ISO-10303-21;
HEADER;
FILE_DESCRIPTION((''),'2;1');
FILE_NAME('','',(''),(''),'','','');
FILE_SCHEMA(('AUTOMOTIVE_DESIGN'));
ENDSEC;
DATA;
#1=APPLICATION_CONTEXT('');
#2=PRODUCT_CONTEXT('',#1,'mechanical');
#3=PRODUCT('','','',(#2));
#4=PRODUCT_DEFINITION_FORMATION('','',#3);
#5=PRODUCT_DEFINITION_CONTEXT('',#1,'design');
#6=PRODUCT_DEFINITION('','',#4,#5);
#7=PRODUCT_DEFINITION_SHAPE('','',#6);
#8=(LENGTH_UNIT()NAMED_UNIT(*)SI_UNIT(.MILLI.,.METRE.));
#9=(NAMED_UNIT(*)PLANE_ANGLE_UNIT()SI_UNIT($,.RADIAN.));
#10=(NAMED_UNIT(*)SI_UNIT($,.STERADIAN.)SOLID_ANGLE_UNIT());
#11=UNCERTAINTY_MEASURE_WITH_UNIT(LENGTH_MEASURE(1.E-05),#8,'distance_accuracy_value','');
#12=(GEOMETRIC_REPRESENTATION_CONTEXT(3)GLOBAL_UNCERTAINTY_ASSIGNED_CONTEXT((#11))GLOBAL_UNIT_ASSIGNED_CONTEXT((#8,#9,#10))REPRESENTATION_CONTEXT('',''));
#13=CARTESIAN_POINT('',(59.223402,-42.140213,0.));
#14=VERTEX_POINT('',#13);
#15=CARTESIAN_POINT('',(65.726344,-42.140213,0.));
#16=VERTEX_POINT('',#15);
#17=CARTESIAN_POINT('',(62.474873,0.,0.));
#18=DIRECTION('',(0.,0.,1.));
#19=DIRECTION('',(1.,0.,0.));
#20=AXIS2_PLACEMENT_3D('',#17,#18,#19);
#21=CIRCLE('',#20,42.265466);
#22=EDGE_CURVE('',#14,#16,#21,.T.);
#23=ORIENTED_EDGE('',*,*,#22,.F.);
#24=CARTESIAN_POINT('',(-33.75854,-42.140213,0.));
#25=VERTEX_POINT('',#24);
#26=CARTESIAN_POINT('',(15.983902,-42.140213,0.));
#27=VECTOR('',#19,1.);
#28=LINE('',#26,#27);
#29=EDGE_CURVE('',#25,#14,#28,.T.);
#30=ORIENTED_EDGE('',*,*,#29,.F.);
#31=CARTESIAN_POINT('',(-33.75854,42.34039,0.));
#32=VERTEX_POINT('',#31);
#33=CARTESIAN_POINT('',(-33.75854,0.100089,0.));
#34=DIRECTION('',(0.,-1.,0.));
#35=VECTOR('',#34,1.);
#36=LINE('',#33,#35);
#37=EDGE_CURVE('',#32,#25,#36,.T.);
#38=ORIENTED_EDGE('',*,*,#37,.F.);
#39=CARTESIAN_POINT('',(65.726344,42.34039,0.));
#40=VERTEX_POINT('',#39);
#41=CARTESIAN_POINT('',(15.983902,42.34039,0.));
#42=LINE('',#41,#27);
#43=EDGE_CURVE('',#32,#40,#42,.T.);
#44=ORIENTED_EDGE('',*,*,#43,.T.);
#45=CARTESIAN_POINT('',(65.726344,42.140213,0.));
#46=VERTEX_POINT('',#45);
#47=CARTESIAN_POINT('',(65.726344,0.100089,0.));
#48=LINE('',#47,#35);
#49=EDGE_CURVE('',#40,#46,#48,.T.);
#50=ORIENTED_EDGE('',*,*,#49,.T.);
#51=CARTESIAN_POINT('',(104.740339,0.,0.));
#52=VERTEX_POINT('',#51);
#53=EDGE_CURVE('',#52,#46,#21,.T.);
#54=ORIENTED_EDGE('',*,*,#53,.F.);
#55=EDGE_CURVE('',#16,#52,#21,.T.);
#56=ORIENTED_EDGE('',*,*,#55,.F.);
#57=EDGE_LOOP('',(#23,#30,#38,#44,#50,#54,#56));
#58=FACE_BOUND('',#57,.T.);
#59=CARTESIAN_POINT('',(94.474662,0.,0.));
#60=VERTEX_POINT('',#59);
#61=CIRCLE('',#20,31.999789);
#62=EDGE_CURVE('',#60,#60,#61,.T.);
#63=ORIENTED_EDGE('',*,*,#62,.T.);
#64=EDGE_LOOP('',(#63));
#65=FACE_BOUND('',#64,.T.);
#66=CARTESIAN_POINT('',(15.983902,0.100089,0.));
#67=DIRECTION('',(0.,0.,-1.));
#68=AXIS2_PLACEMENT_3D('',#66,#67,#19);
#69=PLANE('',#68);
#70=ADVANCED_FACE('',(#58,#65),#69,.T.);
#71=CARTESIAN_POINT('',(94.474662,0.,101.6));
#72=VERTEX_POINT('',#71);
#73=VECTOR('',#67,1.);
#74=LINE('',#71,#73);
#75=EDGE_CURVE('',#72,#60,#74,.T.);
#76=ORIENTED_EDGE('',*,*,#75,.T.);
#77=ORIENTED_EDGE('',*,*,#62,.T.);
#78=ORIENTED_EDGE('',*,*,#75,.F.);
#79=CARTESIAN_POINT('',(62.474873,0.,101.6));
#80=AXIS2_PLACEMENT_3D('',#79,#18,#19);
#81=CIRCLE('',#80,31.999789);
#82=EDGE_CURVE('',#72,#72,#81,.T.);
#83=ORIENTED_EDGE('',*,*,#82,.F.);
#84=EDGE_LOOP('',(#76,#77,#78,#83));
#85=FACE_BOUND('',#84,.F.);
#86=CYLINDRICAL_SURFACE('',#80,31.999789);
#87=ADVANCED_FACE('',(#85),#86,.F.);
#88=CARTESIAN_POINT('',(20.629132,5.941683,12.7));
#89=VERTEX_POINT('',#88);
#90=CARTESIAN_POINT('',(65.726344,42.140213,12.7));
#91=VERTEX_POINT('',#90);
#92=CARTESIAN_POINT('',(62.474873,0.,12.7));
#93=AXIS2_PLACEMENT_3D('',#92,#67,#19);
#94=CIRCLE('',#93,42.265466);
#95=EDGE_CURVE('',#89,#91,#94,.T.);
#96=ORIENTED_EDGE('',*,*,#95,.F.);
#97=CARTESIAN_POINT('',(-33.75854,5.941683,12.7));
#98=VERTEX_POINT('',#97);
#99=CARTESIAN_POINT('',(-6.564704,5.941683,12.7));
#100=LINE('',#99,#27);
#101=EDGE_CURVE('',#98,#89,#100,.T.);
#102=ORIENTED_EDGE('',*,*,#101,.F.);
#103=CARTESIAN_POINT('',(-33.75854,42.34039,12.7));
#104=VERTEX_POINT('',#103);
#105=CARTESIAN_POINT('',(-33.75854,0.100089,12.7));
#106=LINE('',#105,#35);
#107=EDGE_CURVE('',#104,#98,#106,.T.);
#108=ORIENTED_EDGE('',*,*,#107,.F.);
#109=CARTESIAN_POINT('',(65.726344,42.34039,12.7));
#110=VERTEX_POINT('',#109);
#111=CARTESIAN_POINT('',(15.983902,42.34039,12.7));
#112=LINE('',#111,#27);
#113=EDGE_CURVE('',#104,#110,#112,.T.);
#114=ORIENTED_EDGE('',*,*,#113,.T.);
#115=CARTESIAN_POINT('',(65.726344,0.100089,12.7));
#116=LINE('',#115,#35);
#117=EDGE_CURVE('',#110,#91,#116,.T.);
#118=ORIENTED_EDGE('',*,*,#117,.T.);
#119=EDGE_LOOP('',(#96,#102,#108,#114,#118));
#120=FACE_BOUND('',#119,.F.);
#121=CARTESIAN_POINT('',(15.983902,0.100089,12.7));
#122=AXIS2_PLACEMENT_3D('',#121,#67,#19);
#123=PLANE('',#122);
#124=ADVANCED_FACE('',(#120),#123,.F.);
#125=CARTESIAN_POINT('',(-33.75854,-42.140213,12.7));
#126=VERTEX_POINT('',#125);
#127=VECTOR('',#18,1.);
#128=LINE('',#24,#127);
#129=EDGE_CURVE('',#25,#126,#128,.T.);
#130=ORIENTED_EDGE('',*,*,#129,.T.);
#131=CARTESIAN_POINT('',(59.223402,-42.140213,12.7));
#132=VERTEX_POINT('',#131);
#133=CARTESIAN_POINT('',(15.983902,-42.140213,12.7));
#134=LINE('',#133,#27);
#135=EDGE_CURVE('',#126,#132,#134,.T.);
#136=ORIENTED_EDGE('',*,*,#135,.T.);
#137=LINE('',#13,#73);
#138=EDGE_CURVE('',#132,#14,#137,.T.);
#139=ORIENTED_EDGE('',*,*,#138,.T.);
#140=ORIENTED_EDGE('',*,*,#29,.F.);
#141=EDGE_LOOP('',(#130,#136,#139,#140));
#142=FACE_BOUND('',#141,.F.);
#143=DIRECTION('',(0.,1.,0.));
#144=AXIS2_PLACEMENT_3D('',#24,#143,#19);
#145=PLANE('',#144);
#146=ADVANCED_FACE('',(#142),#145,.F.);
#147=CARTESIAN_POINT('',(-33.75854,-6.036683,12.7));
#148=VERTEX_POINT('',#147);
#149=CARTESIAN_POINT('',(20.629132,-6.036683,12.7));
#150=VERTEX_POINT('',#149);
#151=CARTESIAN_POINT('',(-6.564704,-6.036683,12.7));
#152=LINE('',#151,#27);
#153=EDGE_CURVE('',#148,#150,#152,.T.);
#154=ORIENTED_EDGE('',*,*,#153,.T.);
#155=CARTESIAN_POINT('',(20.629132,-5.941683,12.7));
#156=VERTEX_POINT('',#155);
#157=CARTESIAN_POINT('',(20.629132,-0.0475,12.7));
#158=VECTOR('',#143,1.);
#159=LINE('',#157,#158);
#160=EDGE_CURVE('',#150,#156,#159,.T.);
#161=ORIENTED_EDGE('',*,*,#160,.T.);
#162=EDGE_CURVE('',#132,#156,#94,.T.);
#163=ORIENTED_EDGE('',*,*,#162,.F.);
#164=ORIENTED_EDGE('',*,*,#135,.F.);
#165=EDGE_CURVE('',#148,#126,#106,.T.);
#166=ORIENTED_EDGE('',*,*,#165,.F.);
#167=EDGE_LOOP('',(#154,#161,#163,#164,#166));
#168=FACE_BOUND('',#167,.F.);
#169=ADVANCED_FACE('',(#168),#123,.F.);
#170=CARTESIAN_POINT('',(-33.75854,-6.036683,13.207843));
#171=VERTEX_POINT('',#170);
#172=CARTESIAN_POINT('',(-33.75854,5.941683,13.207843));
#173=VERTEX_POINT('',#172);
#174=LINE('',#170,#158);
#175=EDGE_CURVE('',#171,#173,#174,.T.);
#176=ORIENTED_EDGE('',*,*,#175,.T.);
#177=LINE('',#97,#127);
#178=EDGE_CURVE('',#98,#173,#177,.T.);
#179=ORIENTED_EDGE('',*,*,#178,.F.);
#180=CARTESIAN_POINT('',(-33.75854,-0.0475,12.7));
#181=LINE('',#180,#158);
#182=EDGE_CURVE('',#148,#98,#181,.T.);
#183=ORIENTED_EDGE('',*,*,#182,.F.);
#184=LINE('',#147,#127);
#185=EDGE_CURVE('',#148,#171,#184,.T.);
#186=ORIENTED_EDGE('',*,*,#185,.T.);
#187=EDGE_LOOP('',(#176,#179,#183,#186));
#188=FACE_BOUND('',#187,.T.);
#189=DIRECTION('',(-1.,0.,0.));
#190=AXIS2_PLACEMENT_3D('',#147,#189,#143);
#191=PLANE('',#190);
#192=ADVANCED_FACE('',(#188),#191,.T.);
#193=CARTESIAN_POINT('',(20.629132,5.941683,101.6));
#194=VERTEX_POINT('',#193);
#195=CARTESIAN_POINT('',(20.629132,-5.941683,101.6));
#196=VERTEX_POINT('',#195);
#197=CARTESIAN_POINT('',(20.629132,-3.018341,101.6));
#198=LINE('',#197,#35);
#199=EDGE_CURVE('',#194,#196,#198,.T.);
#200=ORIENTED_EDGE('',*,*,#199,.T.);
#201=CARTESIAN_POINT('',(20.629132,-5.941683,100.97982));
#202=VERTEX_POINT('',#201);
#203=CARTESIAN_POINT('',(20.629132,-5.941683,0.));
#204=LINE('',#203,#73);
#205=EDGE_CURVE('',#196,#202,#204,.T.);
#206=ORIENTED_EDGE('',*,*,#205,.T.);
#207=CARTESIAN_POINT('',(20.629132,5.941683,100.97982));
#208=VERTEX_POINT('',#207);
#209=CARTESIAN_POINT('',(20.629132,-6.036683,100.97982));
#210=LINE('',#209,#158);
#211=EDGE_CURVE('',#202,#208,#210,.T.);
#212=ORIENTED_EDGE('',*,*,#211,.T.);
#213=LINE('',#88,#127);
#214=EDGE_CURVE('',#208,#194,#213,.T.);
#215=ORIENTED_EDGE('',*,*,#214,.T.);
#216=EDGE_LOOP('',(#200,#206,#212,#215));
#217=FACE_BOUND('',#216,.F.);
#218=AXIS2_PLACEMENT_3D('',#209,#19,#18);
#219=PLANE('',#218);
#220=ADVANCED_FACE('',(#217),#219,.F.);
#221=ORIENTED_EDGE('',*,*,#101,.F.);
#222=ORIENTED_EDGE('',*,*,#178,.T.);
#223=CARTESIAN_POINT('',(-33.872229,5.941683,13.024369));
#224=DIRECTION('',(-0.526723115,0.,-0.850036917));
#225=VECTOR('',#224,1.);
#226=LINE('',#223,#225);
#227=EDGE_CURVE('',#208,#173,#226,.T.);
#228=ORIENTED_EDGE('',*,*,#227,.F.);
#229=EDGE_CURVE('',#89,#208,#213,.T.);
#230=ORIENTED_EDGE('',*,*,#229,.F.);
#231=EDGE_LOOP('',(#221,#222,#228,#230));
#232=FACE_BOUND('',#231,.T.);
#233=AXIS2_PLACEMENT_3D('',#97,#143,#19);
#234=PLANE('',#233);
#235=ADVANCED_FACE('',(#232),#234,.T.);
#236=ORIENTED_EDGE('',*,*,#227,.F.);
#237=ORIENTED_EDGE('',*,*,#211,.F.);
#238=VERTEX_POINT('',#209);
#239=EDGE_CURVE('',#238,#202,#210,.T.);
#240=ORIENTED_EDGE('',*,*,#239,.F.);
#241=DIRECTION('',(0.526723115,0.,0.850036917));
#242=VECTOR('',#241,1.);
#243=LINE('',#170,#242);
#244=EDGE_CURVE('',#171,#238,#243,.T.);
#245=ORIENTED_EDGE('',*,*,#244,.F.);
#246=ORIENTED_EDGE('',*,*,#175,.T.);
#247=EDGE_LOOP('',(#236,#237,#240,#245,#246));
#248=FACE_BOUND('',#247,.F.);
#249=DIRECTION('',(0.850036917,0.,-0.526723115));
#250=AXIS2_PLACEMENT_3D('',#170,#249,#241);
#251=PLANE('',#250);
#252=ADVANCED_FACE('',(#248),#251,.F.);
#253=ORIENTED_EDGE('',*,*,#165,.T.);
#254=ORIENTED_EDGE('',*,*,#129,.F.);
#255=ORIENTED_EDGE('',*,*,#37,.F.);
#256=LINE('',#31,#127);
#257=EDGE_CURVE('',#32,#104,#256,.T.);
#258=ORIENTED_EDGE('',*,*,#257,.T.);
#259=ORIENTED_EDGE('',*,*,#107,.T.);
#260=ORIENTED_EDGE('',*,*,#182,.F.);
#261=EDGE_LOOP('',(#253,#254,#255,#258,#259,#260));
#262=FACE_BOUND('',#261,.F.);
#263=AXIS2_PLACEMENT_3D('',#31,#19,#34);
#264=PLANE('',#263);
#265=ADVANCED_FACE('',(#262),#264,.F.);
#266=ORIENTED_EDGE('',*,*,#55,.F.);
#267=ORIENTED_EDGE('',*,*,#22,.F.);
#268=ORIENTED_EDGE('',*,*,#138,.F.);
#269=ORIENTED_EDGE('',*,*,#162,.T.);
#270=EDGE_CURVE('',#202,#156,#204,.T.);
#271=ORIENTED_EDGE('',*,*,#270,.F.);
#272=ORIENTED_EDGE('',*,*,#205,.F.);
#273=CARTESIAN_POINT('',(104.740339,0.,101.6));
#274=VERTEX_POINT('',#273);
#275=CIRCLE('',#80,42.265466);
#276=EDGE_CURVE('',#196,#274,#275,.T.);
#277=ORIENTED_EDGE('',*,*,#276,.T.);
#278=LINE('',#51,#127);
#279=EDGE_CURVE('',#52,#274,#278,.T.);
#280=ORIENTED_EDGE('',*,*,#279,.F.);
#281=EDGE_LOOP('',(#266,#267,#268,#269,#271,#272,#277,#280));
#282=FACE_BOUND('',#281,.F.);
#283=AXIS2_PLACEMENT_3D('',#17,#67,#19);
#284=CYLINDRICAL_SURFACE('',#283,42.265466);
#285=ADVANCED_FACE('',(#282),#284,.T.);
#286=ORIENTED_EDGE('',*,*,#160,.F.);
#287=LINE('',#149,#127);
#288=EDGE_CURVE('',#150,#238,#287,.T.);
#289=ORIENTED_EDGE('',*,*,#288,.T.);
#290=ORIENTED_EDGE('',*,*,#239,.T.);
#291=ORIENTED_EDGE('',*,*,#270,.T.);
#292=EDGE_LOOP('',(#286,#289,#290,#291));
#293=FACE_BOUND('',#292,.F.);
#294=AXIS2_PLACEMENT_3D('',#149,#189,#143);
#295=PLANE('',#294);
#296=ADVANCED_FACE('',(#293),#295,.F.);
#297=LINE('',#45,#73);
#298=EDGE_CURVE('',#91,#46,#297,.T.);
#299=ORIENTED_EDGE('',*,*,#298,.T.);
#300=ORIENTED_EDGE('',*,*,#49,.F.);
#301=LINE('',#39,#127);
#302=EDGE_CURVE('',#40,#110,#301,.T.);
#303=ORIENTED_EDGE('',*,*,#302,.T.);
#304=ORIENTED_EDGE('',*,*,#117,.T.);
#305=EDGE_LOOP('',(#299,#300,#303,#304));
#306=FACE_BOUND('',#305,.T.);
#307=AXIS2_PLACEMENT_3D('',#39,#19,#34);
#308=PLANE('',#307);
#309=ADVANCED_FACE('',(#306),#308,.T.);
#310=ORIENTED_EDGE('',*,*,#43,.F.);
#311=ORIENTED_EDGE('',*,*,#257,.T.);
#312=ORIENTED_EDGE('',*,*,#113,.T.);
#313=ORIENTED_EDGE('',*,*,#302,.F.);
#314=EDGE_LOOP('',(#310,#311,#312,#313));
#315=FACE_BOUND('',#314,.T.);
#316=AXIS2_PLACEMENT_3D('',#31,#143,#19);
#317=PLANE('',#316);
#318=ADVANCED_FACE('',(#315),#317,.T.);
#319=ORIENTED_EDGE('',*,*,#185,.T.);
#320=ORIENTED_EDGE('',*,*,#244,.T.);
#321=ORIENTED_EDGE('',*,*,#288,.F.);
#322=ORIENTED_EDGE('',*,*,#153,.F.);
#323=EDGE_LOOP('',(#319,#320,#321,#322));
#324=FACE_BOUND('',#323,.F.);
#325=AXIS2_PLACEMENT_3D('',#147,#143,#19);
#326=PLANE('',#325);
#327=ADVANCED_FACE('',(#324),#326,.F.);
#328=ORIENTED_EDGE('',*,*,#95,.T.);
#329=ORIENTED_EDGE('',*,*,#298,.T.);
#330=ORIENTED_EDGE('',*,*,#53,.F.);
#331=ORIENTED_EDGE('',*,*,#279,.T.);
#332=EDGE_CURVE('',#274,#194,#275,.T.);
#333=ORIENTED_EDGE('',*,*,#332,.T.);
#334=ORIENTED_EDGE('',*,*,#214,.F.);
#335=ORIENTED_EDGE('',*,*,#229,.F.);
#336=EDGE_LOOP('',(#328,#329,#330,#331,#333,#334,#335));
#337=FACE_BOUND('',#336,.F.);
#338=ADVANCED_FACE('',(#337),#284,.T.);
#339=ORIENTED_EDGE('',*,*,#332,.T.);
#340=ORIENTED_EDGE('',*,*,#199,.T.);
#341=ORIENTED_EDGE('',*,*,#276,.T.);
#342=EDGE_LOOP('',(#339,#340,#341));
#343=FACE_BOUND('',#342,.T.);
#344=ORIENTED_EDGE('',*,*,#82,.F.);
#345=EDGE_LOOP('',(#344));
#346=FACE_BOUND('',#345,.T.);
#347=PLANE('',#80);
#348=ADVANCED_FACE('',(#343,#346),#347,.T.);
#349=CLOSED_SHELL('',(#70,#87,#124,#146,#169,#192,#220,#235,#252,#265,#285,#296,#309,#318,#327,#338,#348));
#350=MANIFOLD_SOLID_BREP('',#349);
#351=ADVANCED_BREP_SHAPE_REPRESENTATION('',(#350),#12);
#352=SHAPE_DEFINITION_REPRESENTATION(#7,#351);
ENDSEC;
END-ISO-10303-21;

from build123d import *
from build123d import SkipClean  # not in build123d's __all__

# Parameters (mm, degrees)
F0_R     = 42.2654661293
F1_DEPTH = 101.6
F2_W     = 99.4848832185
F2_H     = 84.4806035552
F3_DEPTH = 12.7
F4_R     = 31.9997887228
F5_DEPTH = 101.601
F6_W     = 54.3876717536
F6_H     = 11.9783656307
F7_DEPTH = 101.6
F9_DEPTH = 48.3780729043


with BuildPart() as f1:
    # F0 (on Top) → F1 (new body)
    with BuildSketch(Plane.XY):
        with Locations((62.4748729169, 0)):
            Circle(F0_R)
    extrude(amount=F1_DEPTH)

    # F2 (on face) → F3 (join)
    with BuildSketch(Plane(origin=(0, 0, 0), x_dir=(1, 0, 0), z_dir=(0, 0, -1))):
        with Locations((15.9839019028, -0.1000886066)):
            Rectangle(F2_W, F2_H)
    extrude(amount=-F3_DEPTH)

    # F4 (on face) → F5 (cut, through all)
    with BuildSketch(Plane.XY.offset(101.6)):
        with Locations((62.4748729169, 0)):
            Circle(F4_R)
    extrude(amount=-F5_DEPTH, mode=Mode.SUBTRACT)

    # F6 (on face) → F7 (join)
    with BuildSketch(Plane.XY.offset(12.7)):
        with Locations((-6.5647038297, -0.0474997047)):
            Rectangle(F6_W, F6_H)
    with SkipClean():  # cleaning this boolean's faces spoils the solid; the shape is the same uncleaned
        extrude(amount=F7_DEPTH)

    # F8 (on face) → F9 (cut, through all)
    with BuildSketch(Plane.XZ.offset(6.0366825201)):
        Polygon((-33.7585397065, 13.207843317), (20.6291320471, 100.9798197685), (20.6291320471, 114.3), (-33.7585397065, 114.3), align=None)
    with SkipClean():  # cleaning this boolean's faces spoils the solid; the shape is the same uncleaned
        extrude(amount=-F9_DEPTH, mode=Mode.SUBTRACT)


solid = f1.part
